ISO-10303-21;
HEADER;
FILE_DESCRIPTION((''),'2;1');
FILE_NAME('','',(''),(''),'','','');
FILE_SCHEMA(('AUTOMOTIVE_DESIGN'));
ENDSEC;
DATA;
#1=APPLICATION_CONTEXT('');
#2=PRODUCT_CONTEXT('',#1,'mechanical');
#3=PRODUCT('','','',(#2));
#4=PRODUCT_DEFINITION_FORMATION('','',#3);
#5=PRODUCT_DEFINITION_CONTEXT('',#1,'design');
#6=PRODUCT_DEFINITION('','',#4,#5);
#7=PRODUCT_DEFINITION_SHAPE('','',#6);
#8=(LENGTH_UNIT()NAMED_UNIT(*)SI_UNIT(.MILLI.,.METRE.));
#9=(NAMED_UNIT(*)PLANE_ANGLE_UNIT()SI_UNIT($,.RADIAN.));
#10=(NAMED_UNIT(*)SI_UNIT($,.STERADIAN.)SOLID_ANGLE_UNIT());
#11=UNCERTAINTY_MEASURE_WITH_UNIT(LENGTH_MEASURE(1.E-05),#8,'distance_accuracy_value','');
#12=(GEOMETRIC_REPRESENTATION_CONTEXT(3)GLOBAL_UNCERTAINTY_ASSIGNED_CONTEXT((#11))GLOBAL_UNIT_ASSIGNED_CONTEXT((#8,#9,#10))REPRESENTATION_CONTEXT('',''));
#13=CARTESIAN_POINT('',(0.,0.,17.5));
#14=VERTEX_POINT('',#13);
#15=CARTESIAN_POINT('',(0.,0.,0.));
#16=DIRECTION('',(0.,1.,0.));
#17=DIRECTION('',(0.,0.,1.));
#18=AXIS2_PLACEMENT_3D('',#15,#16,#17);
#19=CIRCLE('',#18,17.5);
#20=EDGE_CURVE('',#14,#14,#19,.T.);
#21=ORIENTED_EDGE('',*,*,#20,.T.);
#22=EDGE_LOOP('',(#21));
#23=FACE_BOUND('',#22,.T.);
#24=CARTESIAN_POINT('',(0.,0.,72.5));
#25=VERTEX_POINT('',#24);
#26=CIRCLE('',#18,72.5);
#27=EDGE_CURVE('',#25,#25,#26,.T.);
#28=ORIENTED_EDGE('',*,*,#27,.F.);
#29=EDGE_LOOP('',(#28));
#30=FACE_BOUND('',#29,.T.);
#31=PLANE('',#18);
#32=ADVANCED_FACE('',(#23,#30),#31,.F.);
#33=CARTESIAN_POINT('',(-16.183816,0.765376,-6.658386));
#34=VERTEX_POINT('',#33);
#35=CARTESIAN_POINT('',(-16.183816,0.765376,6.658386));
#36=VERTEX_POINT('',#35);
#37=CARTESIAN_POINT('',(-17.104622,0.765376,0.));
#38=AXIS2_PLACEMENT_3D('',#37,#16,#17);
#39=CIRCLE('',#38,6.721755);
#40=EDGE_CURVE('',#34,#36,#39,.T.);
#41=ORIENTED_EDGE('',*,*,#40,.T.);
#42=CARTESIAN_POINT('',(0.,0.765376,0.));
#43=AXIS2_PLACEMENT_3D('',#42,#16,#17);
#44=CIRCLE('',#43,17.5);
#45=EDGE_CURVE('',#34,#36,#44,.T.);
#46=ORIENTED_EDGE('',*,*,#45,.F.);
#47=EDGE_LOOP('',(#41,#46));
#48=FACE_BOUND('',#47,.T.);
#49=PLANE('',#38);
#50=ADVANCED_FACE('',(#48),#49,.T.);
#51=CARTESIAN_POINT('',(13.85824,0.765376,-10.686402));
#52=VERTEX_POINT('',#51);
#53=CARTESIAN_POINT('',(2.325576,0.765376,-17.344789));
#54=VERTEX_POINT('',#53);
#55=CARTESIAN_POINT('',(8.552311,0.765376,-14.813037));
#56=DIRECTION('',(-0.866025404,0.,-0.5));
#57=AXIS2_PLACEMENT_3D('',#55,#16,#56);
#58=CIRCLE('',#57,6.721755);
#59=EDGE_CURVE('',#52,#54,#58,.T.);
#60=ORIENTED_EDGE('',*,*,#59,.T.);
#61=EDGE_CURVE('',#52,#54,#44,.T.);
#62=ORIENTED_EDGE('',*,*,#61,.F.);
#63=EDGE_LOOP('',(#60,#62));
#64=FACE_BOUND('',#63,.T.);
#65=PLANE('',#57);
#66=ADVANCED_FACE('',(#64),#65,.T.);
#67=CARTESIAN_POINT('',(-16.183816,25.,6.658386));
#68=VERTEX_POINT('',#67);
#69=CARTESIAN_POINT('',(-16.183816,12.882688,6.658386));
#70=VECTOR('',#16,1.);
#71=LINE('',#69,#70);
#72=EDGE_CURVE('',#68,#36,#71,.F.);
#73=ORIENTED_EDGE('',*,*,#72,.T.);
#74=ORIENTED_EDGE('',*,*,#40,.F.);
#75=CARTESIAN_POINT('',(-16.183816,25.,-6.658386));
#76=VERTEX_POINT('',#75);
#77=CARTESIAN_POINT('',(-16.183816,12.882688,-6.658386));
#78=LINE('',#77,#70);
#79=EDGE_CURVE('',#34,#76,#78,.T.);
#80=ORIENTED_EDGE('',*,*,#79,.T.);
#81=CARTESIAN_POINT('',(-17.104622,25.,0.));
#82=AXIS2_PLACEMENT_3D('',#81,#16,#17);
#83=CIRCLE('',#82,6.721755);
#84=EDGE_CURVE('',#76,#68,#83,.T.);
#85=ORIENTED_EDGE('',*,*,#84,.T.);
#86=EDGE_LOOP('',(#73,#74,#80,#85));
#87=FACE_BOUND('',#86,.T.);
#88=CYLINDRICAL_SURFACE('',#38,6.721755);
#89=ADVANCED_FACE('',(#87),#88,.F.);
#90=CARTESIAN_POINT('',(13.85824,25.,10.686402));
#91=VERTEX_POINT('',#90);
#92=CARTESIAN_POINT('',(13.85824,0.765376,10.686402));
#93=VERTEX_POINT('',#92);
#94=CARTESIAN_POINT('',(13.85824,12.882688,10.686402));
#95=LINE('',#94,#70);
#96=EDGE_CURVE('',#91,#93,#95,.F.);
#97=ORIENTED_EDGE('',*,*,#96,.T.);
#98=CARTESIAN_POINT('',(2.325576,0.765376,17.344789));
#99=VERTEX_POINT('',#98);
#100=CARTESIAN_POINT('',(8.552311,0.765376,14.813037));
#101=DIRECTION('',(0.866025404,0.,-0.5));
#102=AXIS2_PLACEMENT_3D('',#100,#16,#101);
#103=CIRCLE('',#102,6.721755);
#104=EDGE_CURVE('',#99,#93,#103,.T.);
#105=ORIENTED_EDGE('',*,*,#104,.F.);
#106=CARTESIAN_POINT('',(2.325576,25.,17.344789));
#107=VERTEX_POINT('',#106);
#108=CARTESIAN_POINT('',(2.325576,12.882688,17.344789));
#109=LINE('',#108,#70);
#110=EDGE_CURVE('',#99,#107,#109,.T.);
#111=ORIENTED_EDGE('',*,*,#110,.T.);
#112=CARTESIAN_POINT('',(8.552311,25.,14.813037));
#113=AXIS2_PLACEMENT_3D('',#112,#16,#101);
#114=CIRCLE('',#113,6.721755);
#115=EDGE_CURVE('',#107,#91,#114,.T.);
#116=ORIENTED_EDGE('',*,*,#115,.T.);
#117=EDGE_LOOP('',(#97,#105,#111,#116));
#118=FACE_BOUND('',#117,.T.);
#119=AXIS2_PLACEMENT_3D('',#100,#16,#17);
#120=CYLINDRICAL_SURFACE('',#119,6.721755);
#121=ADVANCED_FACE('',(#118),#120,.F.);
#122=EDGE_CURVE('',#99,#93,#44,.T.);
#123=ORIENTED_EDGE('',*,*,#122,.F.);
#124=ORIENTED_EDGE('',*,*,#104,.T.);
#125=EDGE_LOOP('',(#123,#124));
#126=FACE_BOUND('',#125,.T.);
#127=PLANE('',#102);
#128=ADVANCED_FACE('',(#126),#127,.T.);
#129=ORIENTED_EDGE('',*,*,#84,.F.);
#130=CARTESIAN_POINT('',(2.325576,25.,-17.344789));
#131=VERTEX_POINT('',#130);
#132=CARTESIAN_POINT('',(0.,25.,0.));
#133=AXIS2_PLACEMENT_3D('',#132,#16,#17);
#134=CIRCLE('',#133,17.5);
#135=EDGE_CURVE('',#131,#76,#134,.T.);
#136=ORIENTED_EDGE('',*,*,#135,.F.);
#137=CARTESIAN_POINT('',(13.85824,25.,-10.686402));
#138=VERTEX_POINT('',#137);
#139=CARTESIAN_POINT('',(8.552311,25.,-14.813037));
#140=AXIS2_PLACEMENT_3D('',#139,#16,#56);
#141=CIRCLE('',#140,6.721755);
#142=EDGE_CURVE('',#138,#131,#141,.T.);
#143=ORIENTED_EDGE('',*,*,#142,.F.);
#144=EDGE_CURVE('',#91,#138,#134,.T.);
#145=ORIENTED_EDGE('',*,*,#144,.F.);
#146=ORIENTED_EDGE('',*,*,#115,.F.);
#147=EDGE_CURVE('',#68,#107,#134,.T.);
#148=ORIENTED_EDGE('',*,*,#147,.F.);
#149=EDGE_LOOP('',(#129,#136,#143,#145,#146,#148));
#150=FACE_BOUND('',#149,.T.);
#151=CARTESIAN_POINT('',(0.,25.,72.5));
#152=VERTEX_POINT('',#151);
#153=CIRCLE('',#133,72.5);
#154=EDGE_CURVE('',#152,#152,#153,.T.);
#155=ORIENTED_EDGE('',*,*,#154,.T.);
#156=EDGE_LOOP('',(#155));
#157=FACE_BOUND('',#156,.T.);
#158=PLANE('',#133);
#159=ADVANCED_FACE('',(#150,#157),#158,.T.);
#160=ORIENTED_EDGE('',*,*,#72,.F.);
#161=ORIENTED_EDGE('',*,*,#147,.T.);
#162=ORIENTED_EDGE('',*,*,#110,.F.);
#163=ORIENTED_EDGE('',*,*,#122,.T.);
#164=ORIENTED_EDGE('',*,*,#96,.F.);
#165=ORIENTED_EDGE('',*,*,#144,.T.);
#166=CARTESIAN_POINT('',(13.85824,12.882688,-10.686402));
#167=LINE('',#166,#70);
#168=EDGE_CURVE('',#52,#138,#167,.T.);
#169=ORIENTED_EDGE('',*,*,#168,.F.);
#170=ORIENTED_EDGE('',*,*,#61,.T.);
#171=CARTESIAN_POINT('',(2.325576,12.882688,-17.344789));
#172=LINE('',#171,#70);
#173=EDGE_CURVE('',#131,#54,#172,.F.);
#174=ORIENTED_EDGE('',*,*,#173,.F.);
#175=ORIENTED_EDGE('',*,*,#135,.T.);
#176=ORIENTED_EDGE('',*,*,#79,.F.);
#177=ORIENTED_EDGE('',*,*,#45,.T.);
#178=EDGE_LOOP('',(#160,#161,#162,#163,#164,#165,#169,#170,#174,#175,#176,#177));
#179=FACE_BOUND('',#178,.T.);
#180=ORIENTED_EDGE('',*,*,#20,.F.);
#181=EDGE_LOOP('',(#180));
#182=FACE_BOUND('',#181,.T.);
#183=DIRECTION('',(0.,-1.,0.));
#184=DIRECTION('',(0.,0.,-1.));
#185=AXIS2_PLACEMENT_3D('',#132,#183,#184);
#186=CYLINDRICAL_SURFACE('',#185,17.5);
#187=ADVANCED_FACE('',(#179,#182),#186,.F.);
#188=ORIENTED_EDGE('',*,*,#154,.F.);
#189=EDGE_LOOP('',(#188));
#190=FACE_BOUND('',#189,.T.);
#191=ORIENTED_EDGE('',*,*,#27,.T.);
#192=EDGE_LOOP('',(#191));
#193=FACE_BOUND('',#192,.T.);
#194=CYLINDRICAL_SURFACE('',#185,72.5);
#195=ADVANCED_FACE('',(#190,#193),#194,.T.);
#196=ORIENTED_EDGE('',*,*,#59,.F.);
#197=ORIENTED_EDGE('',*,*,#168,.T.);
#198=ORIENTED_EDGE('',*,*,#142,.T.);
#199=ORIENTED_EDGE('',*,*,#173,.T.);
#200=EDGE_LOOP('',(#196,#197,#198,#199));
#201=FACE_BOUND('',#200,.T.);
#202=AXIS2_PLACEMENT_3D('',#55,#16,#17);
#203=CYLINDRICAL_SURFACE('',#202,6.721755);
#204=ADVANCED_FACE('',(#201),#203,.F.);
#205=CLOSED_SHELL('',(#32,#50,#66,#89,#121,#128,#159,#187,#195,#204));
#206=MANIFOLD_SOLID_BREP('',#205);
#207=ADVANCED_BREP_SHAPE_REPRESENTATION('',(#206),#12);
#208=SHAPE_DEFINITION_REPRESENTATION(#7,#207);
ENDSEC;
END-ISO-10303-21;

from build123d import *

# Parameters (mm, degrees)
SKETCH1_R           = 72.5
BOSS_EXTRUDE1_DEPTH = 25
SKETCH2_R           = 17.5
CUT_EXTRUDE1_DEPTH  = 106.534354596
SKETCH3_R           = 6.721755304
CUT_EXTRUDE2_DEPTH  = 24.234624301
CIRPATTERN1_COUNT   = 3


with BuildPart() as part:
    # Sketch1 → Boss-Extrude1 (new body)
    with BuildSketch(Plane(origin=(0, 0, 0), x_dir=(1, 0, 0), z_dir=(0, 1, 0))):
        Circle(SKETCH1_R)
    extrude(amount=BOSS_EXTRUDE1_DEPTH)

    # Sketch2 → Cut-Extrude1 (cut, through all)
    with BuildSketch(Plane(origin=(0, 0, 0), x_dir=(1, 0, 0), z_dir=(0, 1, 0))):
        Circle(SKETCH2_R)
    extrude(amount=CUT_EXTRUDE1_DEPTH, mode=Mode.SUBTRACT)

    # Sketch3 → Cut-Extrude2 (cut)
    with BuildSketch(Plane(origin=(0, 25, 0), x_dir=(1, 0, 0), z_dir=(0, 1, 0))):
        with Locations((-17.104622237, 0)):
            Circle(SKETCH3_R)
    cut_extrude2 = extrude(amount=-CUT_EXTRUDE2_DEPTH, mode=Mode.SUBTRACT)

    # CirPattern1: Cut-Extrude2 ×3 about axis
    cirpattern1_axis = Axis((0, 0, 0), (0, 1, 0))
    for i in range(1, CIRPATTERN1_COUNT):
        add(cut_extrude2.rotate(cirpattern1_axis, i * 360 / CIRPATTERN1_COUNT), mode=Mode.SUBTRACT)


solid = part.part
